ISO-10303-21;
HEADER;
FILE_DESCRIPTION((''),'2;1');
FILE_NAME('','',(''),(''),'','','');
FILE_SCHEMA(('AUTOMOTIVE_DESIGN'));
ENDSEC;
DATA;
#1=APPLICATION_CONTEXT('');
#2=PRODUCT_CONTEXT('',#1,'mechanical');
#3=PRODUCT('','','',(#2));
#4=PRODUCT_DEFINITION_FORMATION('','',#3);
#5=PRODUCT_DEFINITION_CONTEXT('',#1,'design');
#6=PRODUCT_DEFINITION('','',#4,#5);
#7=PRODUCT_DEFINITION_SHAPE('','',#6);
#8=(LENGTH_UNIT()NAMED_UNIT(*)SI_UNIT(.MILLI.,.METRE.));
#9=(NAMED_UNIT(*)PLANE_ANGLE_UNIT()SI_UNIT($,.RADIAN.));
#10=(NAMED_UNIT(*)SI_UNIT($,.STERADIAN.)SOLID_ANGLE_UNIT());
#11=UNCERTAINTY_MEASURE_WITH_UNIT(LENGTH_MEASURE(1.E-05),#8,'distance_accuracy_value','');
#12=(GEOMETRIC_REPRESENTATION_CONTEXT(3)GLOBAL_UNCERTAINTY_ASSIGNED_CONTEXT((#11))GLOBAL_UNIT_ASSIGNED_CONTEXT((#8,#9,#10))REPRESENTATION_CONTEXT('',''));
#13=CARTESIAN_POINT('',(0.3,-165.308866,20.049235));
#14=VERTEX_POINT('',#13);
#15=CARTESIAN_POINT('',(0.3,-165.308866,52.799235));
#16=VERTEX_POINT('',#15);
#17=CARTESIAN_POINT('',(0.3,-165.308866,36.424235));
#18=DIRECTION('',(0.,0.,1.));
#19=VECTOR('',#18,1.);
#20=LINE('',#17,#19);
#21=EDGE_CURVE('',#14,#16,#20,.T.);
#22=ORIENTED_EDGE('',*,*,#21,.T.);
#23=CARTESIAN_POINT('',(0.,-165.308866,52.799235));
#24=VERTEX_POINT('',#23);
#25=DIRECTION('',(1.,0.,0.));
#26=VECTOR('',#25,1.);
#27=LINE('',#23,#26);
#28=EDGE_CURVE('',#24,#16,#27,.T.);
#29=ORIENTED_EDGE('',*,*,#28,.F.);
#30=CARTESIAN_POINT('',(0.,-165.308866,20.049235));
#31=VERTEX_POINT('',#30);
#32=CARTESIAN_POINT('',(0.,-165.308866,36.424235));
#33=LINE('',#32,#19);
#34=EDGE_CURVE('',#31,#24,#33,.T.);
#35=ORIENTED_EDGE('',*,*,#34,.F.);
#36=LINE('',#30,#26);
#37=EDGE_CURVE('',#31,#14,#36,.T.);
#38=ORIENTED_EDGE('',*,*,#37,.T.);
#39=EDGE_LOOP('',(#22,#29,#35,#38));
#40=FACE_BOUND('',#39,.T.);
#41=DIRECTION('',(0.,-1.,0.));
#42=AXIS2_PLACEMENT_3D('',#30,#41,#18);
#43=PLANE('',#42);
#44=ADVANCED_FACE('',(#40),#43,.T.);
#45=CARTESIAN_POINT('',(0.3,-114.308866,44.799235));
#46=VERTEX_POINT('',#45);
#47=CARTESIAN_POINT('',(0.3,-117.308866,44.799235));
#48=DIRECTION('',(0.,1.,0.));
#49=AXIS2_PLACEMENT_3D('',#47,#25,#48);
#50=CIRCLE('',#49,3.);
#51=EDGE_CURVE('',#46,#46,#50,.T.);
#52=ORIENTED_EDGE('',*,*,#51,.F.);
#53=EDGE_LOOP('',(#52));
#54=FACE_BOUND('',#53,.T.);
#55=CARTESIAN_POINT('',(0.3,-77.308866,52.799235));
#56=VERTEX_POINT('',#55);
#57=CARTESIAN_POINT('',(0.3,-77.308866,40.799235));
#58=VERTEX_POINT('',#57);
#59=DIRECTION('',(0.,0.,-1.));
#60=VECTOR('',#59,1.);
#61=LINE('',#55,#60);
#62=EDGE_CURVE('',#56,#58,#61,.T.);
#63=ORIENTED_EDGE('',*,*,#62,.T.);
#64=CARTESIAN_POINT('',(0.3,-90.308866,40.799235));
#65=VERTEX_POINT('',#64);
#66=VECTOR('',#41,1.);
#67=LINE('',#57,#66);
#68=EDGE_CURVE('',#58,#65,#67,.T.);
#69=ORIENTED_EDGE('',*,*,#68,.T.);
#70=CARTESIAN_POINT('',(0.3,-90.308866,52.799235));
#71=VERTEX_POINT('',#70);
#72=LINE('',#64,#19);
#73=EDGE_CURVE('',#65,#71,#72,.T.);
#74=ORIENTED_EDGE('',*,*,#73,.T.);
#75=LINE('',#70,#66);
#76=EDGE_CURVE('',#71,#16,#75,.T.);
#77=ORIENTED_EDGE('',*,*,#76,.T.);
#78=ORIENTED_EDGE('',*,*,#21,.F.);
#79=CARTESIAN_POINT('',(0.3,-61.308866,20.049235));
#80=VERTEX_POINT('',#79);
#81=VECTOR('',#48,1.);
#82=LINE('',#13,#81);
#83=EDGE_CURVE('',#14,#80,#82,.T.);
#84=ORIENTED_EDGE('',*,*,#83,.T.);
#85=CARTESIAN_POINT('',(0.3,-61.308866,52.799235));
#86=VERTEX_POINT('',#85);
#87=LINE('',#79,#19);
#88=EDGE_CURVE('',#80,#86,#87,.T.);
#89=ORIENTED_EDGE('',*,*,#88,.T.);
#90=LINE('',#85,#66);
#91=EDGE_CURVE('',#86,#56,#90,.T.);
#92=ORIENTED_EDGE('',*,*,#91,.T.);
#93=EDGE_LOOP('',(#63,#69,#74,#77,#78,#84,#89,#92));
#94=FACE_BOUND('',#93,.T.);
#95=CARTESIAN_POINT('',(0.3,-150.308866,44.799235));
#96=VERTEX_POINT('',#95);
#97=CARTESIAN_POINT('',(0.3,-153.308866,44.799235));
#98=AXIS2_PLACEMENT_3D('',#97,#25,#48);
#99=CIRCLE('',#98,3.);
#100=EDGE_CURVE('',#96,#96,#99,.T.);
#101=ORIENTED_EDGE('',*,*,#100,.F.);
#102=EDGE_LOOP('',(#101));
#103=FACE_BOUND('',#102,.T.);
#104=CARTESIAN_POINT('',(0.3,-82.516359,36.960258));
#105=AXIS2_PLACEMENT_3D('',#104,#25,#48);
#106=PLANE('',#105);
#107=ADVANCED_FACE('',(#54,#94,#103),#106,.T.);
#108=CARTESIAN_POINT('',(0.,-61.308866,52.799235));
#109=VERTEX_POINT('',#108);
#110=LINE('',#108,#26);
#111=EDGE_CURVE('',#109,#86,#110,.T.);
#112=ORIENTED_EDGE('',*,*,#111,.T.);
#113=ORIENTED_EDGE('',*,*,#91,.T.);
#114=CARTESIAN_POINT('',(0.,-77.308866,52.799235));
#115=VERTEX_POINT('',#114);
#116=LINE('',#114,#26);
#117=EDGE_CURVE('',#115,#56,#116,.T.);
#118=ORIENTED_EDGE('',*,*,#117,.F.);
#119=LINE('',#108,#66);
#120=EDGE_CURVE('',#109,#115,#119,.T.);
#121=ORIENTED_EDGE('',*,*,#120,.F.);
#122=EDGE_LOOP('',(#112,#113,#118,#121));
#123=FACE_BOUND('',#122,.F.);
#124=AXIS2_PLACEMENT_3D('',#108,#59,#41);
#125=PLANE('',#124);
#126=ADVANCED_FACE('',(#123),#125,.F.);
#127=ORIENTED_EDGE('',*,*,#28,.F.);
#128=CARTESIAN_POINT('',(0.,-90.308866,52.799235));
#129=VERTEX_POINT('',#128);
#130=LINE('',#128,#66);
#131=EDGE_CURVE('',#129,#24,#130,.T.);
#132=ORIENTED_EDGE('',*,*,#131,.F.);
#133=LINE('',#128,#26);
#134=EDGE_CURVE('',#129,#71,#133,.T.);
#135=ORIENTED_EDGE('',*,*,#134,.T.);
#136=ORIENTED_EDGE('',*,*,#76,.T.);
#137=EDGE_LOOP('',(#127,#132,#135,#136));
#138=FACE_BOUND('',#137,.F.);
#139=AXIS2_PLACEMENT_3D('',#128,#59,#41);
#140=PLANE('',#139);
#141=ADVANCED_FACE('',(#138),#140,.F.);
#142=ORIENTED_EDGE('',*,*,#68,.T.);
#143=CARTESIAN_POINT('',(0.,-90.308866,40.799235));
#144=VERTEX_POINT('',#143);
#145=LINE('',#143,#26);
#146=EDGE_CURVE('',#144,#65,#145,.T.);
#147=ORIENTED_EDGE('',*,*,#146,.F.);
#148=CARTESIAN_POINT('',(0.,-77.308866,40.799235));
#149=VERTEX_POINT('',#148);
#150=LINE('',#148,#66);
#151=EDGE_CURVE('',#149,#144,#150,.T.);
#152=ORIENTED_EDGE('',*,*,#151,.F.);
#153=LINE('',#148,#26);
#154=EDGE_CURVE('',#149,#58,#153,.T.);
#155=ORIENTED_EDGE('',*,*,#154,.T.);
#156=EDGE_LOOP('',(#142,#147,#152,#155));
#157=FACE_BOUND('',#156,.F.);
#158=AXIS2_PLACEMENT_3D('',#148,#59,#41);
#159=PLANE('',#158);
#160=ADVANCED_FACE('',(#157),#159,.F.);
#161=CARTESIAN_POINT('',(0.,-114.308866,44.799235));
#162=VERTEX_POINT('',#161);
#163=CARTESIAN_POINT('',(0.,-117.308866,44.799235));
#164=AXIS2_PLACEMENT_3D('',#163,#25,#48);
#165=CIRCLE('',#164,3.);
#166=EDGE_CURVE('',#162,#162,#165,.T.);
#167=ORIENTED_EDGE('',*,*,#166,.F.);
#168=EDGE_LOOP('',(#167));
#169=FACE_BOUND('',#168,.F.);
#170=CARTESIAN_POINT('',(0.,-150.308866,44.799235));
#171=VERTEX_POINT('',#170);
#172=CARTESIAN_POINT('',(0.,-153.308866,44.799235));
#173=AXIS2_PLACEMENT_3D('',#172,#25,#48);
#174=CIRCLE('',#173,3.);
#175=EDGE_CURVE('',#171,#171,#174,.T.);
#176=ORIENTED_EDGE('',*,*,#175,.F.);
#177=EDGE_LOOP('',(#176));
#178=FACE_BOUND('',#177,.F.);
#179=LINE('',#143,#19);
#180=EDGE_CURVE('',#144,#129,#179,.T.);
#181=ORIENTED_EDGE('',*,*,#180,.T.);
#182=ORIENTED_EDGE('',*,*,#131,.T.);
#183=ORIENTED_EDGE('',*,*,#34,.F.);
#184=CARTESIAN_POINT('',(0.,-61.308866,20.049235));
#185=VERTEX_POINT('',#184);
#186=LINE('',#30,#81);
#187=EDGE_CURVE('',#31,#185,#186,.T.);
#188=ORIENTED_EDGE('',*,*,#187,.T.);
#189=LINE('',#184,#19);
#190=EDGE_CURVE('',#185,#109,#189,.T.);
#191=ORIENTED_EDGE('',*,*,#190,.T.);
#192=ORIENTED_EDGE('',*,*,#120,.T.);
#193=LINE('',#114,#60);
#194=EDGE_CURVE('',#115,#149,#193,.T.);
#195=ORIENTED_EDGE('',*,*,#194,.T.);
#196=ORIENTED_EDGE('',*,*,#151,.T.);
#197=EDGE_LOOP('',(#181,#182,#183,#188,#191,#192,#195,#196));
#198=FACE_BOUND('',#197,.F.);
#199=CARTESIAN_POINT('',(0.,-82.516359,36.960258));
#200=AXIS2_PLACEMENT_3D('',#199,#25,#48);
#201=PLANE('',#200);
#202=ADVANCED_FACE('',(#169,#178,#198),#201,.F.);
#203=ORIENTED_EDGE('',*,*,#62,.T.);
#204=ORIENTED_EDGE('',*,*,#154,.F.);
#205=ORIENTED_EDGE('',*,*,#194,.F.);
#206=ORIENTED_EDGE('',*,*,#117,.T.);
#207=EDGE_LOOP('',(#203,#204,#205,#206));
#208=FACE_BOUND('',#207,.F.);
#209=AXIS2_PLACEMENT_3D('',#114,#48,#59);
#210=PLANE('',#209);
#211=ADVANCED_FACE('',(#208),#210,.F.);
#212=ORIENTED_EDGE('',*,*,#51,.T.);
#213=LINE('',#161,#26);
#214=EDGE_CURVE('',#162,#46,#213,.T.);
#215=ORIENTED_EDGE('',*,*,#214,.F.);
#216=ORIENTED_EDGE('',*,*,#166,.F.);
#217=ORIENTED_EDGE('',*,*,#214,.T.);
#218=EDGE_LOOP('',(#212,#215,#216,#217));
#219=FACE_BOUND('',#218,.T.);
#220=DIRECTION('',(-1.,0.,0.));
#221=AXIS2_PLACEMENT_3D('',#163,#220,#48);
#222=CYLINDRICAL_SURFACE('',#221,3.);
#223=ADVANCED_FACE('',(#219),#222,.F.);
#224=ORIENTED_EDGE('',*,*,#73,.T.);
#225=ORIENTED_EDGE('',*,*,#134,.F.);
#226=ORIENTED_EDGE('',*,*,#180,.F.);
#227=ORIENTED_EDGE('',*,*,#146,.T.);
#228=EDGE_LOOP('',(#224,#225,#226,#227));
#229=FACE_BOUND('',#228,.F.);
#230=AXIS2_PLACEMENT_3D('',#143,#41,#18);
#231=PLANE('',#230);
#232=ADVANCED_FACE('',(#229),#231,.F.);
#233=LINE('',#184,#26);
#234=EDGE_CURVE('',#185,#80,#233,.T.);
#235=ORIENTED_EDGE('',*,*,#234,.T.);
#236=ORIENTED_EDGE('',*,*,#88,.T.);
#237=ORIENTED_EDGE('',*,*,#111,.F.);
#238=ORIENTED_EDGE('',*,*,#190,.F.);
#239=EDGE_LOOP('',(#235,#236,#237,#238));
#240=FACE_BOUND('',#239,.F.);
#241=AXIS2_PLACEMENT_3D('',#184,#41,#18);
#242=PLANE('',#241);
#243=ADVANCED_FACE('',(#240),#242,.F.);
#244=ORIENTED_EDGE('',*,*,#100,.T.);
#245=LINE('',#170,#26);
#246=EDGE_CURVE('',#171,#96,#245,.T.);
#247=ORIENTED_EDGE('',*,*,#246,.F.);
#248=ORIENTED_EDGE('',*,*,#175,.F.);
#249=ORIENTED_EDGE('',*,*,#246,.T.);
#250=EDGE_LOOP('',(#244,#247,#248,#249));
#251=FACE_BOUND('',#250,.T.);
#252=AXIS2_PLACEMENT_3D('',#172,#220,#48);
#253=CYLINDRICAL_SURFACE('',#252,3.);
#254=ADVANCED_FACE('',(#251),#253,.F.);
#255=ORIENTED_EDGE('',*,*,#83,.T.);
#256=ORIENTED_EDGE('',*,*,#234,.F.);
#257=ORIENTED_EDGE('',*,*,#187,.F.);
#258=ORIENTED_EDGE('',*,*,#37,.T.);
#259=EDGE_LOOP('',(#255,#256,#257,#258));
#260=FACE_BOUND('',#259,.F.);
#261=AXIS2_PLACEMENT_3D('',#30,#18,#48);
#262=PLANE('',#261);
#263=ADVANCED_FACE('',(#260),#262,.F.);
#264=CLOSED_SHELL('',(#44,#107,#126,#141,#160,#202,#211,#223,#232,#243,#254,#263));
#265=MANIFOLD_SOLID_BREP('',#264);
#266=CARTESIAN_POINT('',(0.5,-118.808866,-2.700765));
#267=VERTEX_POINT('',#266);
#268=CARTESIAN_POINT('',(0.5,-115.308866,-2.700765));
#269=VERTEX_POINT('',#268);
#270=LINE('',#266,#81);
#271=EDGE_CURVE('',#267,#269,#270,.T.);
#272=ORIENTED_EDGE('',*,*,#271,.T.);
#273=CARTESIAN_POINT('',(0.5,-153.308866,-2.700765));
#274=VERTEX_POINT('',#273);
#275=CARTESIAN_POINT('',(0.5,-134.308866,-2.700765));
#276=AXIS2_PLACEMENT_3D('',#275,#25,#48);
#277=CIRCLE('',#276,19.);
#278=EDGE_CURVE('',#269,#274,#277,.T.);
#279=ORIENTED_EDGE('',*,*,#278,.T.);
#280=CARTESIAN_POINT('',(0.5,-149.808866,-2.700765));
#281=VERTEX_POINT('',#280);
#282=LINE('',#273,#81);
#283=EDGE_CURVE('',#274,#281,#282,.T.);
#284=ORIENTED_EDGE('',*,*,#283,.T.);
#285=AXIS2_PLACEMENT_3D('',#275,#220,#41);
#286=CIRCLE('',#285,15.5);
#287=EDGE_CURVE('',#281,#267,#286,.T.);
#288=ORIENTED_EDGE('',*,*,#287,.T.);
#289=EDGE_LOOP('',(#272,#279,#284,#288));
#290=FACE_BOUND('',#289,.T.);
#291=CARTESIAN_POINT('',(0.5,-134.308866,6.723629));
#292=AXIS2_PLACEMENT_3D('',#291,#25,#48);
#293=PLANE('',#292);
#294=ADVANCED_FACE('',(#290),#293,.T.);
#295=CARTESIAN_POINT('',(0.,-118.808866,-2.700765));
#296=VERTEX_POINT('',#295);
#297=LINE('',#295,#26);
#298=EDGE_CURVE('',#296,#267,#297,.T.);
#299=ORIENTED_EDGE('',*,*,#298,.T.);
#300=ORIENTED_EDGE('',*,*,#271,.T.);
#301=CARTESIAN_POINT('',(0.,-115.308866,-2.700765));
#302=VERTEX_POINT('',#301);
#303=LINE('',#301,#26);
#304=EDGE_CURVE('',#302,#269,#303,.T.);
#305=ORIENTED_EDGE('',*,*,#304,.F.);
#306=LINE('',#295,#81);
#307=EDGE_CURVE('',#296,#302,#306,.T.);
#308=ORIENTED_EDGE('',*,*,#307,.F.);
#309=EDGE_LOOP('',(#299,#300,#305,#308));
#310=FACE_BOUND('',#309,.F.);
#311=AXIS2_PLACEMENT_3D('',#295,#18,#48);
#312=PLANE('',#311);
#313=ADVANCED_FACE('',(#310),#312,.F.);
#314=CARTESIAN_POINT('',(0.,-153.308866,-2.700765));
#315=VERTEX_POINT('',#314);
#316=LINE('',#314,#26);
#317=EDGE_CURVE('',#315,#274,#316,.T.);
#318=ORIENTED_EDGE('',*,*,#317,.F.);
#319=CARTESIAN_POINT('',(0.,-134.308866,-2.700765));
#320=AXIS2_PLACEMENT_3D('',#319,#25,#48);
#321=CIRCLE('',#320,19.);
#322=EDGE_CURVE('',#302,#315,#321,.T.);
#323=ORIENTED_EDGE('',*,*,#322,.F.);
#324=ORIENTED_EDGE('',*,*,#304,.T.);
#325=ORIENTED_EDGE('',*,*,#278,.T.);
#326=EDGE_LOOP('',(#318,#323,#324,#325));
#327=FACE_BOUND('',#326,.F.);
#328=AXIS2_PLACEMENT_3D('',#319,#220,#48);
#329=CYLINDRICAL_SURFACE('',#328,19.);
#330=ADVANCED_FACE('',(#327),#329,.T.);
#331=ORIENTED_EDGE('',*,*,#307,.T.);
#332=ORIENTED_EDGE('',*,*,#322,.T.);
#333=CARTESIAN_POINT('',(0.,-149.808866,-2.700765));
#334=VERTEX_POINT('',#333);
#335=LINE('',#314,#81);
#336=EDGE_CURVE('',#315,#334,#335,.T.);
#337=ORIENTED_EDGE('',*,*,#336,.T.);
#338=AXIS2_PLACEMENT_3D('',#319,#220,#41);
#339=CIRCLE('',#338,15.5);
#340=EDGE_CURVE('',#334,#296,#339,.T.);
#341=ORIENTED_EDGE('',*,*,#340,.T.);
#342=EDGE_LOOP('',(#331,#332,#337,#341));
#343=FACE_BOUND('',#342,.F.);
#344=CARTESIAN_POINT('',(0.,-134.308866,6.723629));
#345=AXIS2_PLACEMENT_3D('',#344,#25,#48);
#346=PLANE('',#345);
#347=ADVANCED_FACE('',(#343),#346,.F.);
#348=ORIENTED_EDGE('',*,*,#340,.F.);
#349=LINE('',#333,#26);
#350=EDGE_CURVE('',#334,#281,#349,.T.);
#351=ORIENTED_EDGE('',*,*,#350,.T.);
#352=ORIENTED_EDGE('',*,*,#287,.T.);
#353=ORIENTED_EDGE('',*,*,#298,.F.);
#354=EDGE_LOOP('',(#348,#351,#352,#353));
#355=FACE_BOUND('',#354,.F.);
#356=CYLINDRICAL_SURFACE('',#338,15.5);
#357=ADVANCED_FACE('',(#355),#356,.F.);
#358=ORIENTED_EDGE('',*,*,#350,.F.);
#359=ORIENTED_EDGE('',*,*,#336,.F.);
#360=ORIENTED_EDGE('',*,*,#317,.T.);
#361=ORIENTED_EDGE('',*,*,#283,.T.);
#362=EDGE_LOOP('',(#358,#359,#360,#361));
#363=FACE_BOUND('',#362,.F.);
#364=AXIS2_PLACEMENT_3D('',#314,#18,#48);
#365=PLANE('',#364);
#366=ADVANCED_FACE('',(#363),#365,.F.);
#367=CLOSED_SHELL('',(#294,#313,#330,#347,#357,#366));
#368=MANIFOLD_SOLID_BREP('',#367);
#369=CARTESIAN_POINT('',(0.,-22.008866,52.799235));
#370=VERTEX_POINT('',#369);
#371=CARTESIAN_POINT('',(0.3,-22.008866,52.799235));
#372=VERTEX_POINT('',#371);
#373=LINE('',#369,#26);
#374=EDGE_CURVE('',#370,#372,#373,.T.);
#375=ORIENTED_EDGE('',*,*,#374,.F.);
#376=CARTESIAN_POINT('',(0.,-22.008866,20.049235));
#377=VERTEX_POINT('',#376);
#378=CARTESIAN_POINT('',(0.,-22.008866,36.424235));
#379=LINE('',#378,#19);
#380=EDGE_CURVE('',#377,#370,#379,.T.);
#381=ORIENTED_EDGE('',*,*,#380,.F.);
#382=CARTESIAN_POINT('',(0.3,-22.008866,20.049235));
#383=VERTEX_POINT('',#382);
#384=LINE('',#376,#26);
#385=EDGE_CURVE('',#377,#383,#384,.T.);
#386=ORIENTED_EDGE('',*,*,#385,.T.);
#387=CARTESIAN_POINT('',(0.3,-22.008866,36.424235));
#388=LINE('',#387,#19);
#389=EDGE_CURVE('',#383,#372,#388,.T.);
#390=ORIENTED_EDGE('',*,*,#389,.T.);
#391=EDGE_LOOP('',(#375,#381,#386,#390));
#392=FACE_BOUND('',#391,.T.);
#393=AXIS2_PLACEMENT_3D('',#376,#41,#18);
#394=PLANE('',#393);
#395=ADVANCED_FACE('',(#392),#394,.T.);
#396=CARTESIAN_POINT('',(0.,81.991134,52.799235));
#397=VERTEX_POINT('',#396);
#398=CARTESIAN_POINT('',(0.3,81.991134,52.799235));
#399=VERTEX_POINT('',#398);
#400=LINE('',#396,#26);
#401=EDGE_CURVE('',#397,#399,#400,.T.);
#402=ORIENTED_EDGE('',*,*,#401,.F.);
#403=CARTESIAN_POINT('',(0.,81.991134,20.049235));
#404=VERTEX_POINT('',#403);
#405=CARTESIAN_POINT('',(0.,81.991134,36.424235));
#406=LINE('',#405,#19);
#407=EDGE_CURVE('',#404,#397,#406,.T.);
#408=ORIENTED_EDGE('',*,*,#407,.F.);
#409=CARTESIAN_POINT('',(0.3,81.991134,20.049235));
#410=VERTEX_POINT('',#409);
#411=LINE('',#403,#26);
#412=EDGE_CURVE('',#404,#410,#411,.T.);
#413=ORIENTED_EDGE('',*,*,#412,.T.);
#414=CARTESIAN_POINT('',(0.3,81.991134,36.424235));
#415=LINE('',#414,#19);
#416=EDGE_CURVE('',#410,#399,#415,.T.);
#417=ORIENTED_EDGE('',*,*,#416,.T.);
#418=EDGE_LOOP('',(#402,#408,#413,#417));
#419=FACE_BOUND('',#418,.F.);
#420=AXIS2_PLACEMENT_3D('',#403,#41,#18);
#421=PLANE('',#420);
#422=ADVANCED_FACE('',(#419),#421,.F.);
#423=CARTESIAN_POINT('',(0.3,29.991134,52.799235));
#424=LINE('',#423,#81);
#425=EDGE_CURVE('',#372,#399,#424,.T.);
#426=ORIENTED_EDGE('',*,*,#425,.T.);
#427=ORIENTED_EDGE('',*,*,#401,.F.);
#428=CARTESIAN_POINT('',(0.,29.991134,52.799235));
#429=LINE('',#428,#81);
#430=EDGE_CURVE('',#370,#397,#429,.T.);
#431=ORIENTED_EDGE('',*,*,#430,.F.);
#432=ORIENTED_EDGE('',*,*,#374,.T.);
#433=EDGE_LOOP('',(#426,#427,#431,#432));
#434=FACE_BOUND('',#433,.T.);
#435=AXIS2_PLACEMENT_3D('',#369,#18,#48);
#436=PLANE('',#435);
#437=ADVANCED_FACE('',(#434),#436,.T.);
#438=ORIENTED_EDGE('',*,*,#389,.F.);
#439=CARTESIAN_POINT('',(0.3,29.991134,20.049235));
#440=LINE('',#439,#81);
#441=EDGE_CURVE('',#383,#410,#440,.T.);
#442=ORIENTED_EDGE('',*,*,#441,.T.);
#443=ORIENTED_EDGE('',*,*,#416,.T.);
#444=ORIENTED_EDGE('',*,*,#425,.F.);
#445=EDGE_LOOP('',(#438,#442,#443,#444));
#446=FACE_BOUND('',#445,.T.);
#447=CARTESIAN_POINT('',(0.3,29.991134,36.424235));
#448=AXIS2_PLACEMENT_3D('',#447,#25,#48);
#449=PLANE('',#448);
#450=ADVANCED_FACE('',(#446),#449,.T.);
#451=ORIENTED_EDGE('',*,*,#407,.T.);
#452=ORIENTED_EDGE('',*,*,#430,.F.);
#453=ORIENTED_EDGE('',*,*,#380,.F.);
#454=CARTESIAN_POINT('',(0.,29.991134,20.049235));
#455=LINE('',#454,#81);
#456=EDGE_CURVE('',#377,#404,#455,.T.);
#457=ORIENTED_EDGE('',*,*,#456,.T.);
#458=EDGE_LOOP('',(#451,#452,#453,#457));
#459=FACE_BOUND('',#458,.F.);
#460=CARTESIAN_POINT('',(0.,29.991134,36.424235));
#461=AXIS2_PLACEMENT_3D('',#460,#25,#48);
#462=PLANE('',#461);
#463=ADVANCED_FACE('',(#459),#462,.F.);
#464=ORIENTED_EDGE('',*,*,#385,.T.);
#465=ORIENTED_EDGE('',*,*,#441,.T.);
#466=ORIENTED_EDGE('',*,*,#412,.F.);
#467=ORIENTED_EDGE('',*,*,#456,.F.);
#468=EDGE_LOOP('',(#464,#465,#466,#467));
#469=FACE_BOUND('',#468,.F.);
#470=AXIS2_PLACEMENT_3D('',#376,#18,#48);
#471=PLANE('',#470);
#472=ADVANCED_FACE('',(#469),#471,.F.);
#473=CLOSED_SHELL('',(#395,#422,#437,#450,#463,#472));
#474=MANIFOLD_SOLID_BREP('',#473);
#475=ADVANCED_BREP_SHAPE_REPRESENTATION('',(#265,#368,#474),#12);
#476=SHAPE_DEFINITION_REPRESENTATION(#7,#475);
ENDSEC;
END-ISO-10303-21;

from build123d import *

# Parameters (mm, degrees)
F0_W     = 62
F0_H     = 32.75
F0_R     = 3
F1_DEPTH = 0.3
F0_W_2   = 104
F2_DEPTH = 0.5


# Not quite as in the source:
# - a feature names something its author has since deleted; it is built from what else it names


with BuildPart() as f1:
    # F0 (on Right) → F1 (new body)
    with BuildSketch(Plane.YZ):
        Polygon((-103.3088661638, 20.0492352203), (-61.3088661638, 20.0492352203), (-61.3088661638, 52.7992352203), (-77.3088661638, 52.7992352203), (-77.3088661638, 40.7992352203), (-90.3088661638, 40.7992352203), (-90.3088661638, 52.7992352203), (-103.3088661638, 52.7992352203), align=None)
        with Locations((-134.3088661638, 36.4242352203)):
            Rectangle(F0_W, F0_H)
        with Locations((-153.3088661638, 44.7992352203)):
            Circle(F0_R, mode=Mode.SUBTRACT)
        with Locations((-117.3088661638, 44.7992352203)):
            Circle(F0_R, mode=Mode.SUBTRACT)
    extrude(amount=F1_DEPTH)


with BuildPart() as f1b:
    # F0 (on Right) → F1, piece 2 (new body)
    with BuildSketch(Plane.YZ):
        with Locations((29.9911338362, 36.4242352203)):
            Rectangle(F0_W_2, F0_H)
    extrude(amount=F1_DEPTH)


with BuildPart() as f2:
    # F0 (on Right) → F2 (new body)
    with BuildSketch(Plane.YZ):
        with BuildLine():
            Line((-118.8088661638, -2.7007647797), (-115.3088661638, -2.7007647797))
            ThreePointArc((-115.3088661638, -2.7007647797), (-134.3088661638, 16.2992352203), (-153.3088661638, -2.7007647797))
            Line((-153.3088661638, -2.7007647797), (-149.8088661638, -2.7007647797))
            ThreePointArc((-149.8088661638, -2.7007647797), (-134.3088661638, 12.7992352203), (-118.8088661638, -2.7007647797))
        make_face()
    extrude(amount=F2_DEPTH)


solid = Compound([f1.part, f1b.part, f2.part])
